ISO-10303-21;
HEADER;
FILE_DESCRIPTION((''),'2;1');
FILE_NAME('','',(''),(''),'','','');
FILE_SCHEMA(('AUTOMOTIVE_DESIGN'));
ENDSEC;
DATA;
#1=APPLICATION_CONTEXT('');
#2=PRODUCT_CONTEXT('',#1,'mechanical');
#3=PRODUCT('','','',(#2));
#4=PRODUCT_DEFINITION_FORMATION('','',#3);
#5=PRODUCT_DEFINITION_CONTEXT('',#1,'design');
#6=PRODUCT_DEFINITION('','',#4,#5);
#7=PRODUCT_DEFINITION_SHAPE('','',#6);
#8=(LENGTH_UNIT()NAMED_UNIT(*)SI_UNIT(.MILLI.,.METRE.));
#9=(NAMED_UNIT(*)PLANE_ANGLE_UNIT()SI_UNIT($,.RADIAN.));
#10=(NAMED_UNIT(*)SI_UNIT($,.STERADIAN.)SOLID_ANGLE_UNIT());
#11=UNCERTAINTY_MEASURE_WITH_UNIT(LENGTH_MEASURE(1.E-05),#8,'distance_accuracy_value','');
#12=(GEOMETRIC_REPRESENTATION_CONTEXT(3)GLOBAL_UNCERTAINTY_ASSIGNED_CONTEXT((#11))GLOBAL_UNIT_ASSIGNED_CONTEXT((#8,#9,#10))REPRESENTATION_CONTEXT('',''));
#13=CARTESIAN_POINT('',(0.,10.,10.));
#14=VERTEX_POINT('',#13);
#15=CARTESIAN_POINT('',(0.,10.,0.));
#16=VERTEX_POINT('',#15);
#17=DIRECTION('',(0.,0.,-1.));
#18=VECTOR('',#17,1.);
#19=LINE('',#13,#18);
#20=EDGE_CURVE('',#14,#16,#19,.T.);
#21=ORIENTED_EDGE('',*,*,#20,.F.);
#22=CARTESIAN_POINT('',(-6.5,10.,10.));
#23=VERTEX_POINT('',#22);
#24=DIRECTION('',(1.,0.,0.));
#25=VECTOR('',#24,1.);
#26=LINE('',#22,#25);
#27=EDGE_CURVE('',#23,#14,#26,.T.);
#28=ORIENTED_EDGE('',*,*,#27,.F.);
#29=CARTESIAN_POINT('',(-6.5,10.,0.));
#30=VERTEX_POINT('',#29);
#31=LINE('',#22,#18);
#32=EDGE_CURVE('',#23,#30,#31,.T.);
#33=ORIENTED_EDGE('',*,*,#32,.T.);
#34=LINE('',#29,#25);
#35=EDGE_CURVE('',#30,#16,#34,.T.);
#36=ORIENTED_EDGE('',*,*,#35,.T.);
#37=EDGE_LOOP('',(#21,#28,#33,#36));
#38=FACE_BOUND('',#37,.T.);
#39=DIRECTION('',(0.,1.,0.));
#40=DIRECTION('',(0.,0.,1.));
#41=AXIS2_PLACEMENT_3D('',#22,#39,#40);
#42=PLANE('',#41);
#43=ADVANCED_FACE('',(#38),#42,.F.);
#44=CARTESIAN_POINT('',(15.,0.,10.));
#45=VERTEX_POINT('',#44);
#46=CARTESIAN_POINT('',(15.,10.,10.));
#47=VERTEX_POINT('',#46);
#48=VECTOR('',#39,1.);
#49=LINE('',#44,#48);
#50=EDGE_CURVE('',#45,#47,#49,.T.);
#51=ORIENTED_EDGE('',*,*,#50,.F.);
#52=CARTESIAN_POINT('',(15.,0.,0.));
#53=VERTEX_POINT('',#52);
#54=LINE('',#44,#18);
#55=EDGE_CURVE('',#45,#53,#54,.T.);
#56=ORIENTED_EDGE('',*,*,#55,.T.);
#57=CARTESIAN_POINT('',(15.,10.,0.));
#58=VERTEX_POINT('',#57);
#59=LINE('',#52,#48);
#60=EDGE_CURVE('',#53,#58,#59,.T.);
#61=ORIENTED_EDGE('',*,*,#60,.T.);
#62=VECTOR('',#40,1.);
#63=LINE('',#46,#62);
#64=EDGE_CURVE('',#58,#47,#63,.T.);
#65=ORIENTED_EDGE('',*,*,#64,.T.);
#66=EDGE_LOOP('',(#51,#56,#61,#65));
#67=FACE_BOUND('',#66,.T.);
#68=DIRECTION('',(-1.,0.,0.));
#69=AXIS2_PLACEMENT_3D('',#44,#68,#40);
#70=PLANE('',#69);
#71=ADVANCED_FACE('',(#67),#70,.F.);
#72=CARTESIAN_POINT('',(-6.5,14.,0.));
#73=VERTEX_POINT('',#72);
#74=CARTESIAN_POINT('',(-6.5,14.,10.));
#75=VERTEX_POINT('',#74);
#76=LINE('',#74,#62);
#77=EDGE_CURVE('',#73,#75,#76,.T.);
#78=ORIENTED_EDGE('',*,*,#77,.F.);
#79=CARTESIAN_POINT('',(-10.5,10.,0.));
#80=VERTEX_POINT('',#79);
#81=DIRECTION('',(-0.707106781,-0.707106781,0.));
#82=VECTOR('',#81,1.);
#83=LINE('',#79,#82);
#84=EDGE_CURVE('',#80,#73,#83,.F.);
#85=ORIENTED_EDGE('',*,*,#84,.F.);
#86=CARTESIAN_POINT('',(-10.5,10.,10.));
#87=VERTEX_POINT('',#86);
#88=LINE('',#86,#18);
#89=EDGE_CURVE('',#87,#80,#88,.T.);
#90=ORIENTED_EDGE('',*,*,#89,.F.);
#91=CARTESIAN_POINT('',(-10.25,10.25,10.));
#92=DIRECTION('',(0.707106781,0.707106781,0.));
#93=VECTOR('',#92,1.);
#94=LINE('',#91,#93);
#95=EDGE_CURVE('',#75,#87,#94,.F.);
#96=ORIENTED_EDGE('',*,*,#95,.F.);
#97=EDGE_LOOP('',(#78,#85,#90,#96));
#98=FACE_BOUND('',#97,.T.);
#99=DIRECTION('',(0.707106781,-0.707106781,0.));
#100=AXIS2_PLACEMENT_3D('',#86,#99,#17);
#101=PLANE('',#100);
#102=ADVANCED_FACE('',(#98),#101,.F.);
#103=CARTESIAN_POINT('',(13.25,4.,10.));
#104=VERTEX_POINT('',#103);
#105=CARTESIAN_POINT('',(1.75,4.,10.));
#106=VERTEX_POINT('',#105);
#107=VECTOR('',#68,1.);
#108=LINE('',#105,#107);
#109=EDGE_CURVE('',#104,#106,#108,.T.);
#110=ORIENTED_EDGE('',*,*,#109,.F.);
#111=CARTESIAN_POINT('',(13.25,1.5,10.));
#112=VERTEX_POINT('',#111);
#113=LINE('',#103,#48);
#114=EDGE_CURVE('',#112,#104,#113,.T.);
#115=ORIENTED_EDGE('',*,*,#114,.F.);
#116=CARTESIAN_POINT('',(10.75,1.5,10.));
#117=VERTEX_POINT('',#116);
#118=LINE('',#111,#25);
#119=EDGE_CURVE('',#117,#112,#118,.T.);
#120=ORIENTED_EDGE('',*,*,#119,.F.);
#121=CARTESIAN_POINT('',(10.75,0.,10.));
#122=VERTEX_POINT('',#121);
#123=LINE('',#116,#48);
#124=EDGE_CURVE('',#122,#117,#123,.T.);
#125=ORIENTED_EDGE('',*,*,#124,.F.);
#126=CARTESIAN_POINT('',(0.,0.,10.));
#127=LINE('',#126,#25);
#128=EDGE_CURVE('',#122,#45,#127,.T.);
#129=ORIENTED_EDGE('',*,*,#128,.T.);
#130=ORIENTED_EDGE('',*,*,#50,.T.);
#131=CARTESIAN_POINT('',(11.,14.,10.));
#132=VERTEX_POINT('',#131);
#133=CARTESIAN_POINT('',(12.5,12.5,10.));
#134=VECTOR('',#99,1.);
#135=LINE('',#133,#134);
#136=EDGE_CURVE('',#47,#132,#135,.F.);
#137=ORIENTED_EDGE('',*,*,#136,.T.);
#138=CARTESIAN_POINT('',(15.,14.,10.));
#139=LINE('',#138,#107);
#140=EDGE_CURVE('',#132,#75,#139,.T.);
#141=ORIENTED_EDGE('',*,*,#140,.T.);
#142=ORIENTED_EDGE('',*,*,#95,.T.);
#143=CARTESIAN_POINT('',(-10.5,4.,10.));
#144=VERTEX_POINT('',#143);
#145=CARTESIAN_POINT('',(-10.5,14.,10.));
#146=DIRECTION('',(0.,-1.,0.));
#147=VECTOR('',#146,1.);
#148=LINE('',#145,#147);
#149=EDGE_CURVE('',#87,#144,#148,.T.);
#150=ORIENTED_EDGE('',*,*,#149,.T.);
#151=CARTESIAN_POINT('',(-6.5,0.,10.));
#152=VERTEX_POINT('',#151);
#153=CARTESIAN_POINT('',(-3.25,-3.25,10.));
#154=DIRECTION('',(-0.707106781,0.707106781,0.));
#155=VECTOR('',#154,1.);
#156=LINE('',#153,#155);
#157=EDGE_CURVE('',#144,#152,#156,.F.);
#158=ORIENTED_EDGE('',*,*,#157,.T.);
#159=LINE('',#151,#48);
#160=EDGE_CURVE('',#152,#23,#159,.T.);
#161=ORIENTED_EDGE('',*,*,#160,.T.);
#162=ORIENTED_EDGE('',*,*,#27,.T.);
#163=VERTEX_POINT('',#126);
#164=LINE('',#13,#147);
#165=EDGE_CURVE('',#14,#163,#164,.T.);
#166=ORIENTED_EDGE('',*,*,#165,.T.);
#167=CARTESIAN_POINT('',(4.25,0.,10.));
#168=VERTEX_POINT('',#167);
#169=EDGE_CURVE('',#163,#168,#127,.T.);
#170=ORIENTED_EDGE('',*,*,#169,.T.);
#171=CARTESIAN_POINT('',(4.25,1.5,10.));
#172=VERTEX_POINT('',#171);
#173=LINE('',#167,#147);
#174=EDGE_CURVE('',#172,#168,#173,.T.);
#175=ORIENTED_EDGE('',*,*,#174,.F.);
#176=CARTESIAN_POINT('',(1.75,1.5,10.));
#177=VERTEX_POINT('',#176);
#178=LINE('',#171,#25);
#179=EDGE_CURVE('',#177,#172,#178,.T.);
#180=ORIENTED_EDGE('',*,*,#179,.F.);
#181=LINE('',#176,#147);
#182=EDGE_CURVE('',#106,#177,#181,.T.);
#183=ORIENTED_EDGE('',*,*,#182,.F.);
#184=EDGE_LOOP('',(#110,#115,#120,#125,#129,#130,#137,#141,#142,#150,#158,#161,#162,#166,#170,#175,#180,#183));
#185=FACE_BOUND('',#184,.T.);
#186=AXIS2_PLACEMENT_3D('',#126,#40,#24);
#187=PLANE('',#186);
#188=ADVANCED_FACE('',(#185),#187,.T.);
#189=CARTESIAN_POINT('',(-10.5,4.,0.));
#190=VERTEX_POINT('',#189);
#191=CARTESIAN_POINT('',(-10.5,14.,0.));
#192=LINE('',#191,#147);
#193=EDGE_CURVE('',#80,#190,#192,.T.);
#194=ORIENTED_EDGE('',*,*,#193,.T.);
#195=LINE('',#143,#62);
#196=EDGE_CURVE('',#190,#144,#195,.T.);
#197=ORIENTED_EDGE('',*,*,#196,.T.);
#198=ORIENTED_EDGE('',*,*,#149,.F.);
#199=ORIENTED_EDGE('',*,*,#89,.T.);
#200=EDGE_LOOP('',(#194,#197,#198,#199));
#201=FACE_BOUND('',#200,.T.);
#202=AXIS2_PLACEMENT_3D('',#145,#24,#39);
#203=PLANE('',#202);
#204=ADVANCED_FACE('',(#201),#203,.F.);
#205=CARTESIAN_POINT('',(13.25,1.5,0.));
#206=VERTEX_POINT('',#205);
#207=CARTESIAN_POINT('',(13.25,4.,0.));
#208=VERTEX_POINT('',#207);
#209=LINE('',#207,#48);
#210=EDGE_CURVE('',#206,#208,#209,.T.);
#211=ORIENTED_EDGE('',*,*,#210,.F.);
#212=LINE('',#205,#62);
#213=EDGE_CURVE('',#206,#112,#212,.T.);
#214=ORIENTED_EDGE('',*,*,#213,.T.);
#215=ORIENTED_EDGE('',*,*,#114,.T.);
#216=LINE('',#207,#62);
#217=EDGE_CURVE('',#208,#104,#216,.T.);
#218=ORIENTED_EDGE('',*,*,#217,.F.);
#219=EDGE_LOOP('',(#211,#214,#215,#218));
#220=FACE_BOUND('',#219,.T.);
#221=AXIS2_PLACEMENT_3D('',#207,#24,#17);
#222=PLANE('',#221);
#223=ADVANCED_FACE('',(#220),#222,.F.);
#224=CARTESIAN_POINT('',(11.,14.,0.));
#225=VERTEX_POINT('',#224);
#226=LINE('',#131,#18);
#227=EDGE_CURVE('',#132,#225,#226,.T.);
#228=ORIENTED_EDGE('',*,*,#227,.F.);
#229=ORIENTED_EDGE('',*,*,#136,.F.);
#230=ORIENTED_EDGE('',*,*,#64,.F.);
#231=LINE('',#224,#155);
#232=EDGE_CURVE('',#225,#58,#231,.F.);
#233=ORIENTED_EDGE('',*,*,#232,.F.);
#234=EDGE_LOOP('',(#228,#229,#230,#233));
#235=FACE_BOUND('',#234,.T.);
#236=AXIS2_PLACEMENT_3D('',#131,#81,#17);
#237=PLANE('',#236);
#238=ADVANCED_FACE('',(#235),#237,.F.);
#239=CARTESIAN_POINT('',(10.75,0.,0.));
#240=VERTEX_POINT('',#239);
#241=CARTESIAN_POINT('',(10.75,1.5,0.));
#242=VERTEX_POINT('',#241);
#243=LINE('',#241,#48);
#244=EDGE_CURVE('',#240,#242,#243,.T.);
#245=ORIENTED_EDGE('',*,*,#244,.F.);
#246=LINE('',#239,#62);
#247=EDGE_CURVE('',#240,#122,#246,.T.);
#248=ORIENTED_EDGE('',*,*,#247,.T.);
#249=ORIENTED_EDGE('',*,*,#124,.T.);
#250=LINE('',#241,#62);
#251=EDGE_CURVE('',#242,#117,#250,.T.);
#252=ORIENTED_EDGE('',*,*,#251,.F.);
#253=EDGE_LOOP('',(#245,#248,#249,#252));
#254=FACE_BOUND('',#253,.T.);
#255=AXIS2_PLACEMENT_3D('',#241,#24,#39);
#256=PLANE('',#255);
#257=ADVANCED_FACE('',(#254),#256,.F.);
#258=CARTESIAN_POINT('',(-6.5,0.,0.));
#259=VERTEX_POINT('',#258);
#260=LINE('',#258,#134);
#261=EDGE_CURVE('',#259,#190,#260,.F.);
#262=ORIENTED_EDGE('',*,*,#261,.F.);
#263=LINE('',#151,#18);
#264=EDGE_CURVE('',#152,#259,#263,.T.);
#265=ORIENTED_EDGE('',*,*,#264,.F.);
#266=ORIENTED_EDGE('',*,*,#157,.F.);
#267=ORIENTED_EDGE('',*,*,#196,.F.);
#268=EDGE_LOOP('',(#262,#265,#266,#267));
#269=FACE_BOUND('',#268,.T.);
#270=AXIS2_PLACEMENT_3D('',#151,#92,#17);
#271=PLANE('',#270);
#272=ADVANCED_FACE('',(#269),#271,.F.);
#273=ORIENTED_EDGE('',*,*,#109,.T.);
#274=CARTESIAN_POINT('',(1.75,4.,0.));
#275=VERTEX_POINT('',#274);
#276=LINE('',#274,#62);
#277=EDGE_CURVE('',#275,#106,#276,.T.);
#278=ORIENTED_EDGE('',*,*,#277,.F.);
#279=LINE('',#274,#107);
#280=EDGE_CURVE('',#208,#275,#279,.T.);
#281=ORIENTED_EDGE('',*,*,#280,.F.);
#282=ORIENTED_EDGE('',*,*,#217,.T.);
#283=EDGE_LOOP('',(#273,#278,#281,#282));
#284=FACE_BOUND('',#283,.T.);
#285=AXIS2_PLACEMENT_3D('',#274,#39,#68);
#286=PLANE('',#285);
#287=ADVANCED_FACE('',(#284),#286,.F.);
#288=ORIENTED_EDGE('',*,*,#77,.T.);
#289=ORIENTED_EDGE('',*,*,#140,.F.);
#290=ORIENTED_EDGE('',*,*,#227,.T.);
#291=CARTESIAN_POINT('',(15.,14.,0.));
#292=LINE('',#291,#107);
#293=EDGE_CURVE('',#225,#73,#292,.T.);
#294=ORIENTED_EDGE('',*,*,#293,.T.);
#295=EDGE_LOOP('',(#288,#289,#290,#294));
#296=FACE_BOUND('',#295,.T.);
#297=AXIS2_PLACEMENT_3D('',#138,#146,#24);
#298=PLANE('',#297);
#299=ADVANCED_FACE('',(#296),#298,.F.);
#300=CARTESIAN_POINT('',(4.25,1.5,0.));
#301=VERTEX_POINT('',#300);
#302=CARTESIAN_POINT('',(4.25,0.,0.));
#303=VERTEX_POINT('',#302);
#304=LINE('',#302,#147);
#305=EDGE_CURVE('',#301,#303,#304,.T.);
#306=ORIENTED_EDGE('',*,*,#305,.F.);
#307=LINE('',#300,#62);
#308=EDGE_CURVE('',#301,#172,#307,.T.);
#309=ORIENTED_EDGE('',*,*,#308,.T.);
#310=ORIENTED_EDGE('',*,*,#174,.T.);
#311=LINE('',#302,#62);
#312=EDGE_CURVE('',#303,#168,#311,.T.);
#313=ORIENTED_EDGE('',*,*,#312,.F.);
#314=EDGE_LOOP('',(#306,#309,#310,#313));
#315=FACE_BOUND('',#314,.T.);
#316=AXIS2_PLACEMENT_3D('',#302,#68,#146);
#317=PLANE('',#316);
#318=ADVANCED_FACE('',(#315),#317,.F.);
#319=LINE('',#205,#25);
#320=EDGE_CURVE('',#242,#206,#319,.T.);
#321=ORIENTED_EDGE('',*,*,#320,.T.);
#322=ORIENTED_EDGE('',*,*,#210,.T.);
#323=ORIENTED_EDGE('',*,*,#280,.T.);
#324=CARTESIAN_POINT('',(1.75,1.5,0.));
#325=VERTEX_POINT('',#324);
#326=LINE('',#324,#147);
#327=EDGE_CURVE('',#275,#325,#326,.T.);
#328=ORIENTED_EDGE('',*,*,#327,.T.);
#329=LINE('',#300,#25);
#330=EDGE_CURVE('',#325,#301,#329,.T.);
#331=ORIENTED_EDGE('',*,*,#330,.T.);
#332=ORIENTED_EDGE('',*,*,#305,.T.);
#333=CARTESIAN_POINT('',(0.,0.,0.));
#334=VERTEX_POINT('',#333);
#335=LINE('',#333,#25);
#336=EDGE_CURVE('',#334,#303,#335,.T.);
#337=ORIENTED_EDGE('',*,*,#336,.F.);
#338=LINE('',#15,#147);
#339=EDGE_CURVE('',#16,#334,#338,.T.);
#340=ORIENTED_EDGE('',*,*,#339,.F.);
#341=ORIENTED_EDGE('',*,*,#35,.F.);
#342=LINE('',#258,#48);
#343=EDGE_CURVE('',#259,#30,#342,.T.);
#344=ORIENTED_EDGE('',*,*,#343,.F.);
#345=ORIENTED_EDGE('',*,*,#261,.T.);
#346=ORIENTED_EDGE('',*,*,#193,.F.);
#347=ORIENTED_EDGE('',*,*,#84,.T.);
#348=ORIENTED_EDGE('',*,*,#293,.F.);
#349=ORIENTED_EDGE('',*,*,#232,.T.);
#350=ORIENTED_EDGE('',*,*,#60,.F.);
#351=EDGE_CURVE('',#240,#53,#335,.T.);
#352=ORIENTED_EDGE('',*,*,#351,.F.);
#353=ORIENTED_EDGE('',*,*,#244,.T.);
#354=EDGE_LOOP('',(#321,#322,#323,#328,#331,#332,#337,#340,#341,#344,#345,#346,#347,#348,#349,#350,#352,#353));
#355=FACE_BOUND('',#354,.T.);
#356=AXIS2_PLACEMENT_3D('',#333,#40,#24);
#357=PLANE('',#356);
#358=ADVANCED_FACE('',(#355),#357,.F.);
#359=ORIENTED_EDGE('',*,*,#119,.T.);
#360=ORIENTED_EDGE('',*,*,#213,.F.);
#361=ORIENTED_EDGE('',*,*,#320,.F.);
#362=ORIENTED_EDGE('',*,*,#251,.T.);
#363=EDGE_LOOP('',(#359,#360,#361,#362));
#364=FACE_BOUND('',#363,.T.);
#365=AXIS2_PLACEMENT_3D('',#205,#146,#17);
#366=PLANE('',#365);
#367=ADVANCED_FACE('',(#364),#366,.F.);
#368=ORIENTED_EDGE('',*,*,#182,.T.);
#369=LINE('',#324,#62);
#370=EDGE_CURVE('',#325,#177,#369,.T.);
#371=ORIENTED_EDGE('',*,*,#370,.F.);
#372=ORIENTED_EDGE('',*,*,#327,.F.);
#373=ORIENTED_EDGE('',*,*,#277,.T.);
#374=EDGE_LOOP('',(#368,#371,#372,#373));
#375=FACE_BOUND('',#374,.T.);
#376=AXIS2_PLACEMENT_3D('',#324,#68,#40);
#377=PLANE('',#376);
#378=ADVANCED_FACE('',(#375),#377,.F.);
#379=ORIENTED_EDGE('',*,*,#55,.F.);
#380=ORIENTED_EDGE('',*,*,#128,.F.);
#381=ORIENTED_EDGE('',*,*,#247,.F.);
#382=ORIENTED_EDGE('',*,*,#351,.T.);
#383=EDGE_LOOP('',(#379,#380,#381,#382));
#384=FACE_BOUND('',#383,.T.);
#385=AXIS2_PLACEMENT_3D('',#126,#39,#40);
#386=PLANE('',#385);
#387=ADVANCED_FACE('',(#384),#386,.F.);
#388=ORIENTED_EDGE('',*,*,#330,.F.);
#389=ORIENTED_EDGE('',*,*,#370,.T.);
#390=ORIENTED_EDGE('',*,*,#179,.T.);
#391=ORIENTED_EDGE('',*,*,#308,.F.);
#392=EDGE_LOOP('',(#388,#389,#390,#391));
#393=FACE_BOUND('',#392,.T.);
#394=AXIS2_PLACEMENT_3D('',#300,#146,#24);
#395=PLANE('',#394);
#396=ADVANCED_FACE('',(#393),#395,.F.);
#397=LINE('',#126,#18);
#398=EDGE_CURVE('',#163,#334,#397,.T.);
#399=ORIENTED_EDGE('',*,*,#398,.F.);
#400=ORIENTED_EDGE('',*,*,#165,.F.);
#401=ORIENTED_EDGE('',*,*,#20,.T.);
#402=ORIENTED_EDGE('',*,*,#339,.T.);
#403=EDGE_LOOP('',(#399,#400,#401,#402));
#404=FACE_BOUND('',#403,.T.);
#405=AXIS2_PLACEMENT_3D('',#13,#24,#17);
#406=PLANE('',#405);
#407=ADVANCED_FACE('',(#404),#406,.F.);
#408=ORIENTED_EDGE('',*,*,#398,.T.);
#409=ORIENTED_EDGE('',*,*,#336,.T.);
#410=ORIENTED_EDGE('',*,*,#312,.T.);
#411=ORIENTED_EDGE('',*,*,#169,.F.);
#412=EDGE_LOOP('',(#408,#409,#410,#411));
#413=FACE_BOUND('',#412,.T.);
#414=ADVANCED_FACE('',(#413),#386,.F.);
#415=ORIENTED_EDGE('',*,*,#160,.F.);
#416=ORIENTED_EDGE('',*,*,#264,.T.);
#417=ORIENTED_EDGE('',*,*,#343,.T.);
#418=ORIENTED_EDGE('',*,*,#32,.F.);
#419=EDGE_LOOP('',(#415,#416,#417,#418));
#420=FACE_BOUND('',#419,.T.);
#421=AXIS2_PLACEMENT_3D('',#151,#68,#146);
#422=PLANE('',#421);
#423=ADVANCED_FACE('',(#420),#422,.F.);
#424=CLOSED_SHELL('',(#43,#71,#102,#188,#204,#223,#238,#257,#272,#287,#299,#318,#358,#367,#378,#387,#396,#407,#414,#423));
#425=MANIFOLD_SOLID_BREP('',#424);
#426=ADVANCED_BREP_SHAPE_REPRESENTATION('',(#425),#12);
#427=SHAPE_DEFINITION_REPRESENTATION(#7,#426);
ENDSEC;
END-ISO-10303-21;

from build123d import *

# Parameters (mm, degrees)
BOSS_EXTRUDE1_DEPTH = 10
CHAMFER1_SIZE       = 4
CUT_EXTRUDE1_DEPTH  = 23.825424421


with BuildPart() as part:
    # Sketch1 → Boss-Extrude1 (new body)
    with BuildSketch(Plane.XY):
        Polygon((0, 0), (15, 0), (15, 14), (-10.5, 14), (-10.5, 0), (-6.5, 0), (-6.5, 10), (0, 10), align=None)
    extrude(amount=BOSS_EXTRUDE1_DEPTH)

    # Chamfer1
    chamfer1_edges = [part.edges().sort_by_distance(p)[0] for p in [
        (-10.5, 14, 5),
        (15, 14, 5),
        (-10.5, 0, 5),
    ]]
    chamfer(chamfer1_edges, length=CHAMFER1_SIZE - 0.0001)  # a hair under: the kernel refuses the full size

    # Sketch2 → Cut-Extrude1 (cut, through all)
    with BuildSketch(Plane.XY.offset(10)):
        Polygon((4.25, 0), (4.25, 1.5), (1.75, 1.5), (1.75, 4), (13.25, 4), (13.25, 1.5), (10.75, 1.5), (10.75, 0), align=None)
    extrude(amount=-CUT_EXTRUDE1_DEPTH, mode=Mode.SUBTRACT)


solid = part.part
